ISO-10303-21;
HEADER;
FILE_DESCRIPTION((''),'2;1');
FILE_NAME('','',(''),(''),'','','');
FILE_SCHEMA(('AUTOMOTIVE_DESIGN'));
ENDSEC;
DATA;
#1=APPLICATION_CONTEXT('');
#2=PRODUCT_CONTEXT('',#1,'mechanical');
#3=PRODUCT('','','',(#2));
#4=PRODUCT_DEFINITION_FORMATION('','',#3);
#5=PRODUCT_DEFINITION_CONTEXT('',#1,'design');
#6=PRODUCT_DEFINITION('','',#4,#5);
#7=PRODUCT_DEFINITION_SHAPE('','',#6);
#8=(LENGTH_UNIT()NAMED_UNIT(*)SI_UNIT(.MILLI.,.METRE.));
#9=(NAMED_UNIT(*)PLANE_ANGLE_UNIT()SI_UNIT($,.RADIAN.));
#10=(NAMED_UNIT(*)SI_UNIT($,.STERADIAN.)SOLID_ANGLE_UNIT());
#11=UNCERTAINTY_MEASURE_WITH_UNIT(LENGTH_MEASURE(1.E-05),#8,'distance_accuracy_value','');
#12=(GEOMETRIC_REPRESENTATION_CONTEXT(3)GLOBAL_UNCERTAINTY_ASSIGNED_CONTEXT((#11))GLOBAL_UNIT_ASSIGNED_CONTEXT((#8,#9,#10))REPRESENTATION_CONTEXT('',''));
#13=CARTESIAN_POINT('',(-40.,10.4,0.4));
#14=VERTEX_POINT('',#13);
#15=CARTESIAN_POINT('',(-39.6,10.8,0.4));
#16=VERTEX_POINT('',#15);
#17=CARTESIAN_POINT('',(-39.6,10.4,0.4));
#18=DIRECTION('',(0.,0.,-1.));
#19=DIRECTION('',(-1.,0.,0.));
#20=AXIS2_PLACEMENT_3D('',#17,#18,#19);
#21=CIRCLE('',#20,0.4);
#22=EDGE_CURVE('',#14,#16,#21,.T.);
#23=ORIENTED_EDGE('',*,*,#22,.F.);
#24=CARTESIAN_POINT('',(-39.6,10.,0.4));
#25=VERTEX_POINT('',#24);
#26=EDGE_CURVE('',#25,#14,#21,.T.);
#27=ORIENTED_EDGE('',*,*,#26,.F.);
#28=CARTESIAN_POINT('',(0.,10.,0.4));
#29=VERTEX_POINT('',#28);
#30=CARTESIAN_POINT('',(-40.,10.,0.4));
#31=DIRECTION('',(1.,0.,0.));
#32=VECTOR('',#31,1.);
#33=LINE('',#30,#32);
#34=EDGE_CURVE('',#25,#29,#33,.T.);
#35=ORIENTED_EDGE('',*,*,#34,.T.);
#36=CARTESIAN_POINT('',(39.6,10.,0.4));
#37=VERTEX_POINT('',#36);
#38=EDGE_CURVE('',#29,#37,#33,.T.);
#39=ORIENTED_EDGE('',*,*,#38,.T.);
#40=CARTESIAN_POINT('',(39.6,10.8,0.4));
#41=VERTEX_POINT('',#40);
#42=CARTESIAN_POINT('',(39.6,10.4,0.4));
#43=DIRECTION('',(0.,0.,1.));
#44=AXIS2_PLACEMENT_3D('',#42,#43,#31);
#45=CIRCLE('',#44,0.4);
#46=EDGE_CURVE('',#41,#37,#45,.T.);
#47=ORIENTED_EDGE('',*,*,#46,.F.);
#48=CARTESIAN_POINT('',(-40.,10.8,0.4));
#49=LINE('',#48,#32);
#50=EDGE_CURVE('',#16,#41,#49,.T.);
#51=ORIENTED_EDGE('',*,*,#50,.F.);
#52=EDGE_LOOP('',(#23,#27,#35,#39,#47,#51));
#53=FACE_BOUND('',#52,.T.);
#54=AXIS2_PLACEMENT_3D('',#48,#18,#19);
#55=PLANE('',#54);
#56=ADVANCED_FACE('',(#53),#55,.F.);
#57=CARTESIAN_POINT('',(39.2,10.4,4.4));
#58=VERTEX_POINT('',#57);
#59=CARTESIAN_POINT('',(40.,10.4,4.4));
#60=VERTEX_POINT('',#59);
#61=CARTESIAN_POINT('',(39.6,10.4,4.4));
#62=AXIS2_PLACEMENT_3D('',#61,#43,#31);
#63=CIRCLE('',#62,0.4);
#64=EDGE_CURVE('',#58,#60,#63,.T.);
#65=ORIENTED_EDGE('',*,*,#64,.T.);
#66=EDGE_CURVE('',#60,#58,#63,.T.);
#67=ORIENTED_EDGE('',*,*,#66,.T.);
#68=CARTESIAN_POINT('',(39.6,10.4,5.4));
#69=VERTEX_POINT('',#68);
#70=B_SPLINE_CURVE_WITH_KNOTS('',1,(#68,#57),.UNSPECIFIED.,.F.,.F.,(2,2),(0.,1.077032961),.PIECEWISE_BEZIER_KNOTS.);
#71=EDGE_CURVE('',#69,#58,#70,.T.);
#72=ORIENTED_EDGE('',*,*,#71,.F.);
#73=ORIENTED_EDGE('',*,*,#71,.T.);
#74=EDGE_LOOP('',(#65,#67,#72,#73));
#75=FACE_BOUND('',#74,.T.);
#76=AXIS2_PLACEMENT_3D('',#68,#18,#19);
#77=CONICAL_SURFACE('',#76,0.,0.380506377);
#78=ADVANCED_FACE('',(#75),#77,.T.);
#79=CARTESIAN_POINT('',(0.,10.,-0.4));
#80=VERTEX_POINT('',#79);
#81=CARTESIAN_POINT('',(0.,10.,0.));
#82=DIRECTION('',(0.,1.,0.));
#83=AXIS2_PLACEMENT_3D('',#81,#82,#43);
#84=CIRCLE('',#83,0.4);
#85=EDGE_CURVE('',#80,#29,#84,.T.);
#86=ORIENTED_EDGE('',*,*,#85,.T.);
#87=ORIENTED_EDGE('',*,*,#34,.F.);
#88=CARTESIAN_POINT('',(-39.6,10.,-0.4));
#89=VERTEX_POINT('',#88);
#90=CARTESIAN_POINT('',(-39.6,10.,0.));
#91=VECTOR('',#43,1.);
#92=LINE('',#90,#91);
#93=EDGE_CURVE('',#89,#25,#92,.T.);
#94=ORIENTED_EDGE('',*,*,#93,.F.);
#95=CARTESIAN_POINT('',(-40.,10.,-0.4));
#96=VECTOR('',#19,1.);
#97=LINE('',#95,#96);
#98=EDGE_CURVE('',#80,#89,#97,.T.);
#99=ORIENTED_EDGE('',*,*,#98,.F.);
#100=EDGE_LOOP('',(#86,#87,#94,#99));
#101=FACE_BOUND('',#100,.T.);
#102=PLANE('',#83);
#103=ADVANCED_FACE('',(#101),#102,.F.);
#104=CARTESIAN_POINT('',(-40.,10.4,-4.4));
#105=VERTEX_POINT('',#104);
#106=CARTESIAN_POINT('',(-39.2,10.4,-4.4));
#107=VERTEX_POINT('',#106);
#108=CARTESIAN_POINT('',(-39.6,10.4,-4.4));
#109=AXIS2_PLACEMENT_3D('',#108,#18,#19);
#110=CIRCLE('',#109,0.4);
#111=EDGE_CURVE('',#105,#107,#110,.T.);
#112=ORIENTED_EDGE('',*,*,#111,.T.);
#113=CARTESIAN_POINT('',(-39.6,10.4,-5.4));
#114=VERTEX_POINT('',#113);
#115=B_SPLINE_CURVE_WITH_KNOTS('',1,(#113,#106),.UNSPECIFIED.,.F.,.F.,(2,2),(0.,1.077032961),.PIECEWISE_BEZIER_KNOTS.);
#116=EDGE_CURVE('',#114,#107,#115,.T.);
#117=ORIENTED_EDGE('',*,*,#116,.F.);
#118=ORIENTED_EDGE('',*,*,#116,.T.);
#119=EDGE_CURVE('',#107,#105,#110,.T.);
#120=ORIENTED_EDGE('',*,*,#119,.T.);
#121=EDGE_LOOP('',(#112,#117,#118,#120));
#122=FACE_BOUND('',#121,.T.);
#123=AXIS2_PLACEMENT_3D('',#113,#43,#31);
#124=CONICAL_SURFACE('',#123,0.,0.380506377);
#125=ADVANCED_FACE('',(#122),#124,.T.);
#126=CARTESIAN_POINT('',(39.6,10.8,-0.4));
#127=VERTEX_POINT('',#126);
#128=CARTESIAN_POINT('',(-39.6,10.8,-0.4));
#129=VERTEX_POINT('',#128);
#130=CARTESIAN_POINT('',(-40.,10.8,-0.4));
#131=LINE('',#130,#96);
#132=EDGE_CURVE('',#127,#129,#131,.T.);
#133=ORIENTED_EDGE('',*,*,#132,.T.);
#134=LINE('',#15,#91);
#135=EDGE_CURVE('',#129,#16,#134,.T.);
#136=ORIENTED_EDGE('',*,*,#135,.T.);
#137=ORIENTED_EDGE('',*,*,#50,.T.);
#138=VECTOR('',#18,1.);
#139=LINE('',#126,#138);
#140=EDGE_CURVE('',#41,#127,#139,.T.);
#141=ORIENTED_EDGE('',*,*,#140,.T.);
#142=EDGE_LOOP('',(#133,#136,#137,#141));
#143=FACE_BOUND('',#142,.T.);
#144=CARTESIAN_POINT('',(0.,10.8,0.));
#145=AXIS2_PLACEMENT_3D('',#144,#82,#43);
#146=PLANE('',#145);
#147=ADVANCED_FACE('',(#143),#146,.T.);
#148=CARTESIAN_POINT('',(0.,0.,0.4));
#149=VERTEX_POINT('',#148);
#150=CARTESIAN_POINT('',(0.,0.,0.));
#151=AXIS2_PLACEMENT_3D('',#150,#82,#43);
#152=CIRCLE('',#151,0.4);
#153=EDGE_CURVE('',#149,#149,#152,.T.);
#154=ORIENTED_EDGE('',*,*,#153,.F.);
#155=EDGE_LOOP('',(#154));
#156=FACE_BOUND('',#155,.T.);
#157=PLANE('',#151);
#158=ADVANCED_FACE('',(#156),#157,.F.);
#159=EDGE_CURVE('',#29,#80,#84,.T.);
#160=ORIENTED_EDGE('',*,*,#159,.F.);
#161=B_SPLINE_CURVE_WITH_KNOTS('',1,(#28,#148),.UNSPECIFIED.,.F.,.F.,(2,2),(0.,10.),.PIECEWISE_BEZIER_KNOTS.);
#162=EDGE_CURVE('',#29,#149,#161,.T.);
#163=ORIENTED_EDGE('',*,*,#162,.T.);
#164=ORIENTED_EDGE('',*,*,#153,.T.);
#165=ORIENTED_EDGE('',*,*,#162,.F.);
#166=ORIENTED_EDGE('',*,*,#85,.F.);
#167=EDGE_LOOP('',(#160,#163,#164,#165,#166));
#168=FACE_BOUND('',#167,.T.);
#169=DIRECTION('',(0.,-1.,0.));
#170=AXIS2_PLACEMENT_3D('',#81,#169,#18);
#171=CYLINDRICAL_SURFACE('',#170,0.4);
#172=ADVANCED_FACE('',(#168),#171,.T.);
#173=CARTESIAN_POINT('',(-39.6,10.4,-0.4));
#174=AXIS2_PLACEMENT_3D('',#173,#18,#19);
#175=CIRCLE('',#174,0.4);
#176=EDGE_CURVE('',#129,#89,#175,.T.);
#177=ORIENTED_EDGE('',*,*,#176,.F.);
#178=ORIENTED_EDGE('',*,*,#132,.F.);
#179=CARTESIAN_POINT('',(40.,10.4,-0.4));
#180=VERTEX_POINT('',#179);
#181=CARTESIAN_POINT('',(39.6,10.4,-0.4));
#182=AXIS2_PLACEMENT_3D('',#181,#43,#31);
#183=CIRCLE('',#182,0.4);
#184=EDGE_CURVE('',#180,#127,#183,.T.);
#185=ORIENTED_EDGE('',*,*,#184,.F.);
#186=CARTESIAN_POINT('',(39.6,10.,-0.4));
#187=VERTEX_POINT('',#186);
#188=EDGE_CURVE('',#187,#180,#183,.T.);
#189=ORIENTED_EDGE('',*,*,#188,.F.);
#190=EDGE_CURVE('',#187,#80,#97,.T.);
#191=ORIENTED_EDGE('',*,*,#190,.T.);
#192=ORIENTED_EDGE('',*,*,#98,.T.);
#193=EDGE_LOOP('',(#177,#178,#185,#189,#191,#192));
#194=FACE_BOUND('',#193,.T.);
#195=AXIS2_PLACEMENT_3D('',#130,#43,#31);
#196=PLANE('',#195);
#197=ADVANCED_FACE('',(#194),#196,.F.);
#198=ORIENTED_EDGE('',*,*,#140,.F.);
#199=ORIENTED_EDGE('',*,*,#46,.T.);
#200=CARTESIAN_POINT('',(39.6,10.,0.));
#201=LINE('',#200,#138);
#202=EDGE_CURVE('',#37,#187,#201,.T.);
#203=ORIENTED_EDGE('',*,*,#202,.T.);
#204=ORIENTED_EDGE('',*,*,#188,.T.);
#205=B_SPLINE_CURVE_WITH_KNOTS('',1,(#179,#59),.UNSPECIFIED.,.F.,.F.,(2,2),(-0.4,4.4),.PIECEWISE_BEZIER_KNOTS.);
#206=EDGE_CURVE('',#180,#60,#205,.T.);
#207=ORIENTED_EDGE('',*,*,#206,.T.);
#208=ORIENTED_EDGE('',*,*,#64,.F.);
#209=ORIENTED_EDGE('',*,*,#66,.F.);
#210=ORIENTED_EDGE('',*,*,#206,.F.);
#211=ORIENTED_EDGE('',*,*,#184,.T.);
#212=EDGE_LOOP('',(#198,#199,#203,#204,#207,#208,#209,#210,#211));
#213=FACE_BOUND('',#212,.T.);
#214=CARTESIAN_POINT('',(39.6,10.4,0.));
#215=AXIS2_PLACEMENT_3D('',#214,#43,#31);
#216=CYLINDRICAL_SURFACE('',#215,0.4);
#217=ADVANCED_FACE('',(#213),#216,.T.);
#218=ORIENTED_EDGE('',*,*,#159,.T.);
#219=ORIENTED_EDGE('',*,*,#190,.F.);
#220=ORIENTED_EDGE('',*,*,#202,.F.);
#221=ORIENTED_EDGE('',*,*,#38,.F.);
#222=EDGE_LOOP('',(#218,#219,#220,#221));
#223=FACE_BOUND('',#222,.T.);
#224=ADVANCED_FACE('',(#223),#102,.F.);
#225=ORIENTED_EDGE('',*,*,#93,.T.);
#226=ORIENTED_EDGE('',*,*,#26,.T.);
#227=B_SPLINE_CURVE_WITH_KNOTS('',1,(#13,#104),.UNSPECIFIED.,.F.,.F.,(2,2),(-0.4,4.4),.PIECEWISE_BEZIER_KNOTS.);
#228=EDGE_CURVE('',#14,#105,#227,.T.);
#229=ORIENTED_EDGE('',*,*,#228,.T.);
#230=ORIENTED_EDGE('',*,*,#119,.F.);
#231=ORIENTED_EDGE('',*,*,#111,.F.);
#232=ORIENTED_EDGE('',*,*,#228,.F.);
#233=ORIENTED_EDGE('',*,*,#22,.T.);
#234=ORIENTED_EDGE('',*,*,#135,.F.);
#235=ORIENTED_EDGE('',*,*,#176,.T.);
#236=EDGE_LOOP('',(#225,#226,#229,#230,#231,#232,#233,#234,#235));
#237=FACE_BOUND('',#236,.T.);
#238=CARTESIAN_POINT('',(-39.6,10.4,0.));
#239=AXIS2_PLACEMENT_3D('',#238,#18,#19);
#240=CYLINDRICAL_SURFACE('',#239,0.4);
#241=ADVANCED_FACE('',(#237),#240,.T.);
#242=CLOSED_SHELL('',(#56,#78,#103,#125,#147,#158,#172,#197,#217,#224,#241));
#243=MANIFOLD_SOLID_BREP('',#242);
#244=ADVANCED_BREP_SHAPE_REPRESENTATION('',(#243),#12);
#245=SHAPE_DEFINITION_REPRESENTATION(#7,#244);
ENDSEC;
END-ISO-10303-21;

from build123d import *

# Parameters (mm, degrees)
SKETCH_1_R      = 0.4
EXTRUDE_1_DEPTH = 10
SKETCH_2_W      = 80
SKETCH_2_H      = 0.8
EXTRUDE_2_DEPTH = 0.8
FILLET_1_R      = 0.4
SKETCH_3_R      = 0.4
EXTRUDE_3_DEPTH = 4
SKETCH_4_R      = 0.4
EXTRUDE_4_DEPTH = 4


with BuildPart() as part:
    # 草图1 → 凸台-拉伸1 (new body)
    with BuildSketch(Plane(origin=(0, 0, 0), x_dir=(1, 0, 0), z_dir=(0, 1, 0))):
        with Locations(Location((0, 0, 0), (0, 0, 270))):
            Circle(SKETCH_1_R)
    extrude(amount=EXTRUDE_1_DEPTH)

    # 草图2 → 凸台-拉伸2 (add)
    with BuildSketch(Plane(origin=(0, 10, 0), x_dir=(1, 0, 0), z_dir=(0, 1, 0))):
        Rectangle(SKETCH_2_W, SKETCH_2_H)
    extrude(amount=EXTRUDE_2_DEPTH)

    # 圆角1
    fillet_1_edges = [part.edges().sort_by_distance(p)[0] for p in [
        (40, 10, 0),
        (40, 10.8, 0),
        (-40, 10, 0),
        (-40, 10.8, 0),
    ]]
    fillet(fillet_1_edges, radius=FILLET_1_R - 0.0001)  # a hair under: the kernel refuses the full size

    # 草图3 → 凸台-拉伸3 (add)
    with BuildSketch(Plane.XY.offset(0.4)):
        with Locations((39.6, 10.4)):
            Circle(SKETCH_3_R)
    extrude(amount=EXTRUDE_3_DEPTH)

    # 草图4 → 凸台-拉伸4 (add)
    with BuildSketch(Plane(origin=(0, 0, -0.4), x_dir=(-1, 0, 0), z_dir=(0, 0, -1))):
        with Locations((39.6, 10.4)):
            Circle(SKETCH_4_R)
    extrude(amount=EXTRUDE_4_DEPTH)

    # 草图5 → 旋转1 (revolve)
    with BuildSketch(Plane(origin=(0, 10.4, 0), x_dir=(1, 0, 0), z_dir=(0, 1, 0))):
        Polygon((39.6, -4.4), (39.6, -5.4), (40, -4.4), align=None)
    revolve(axis=Axis((39.6, 10.4, 4.4), (0, 0, 1)))

    # 草图6 → 旋转2 (revolve)
    with BuildSketch(Plane(origin=(0, 10.4, 0), x_dir=(1, 0, 0), z_dir=(0, 1, 0))):
        Polygon((-39.6, 4.4), (-39.6, 5.4), (-40, 4.4), align=None)
    revolve(axis=Axis((-39.6, 10.4, -4.4), (0, 0, -1)))


solid = part.part
